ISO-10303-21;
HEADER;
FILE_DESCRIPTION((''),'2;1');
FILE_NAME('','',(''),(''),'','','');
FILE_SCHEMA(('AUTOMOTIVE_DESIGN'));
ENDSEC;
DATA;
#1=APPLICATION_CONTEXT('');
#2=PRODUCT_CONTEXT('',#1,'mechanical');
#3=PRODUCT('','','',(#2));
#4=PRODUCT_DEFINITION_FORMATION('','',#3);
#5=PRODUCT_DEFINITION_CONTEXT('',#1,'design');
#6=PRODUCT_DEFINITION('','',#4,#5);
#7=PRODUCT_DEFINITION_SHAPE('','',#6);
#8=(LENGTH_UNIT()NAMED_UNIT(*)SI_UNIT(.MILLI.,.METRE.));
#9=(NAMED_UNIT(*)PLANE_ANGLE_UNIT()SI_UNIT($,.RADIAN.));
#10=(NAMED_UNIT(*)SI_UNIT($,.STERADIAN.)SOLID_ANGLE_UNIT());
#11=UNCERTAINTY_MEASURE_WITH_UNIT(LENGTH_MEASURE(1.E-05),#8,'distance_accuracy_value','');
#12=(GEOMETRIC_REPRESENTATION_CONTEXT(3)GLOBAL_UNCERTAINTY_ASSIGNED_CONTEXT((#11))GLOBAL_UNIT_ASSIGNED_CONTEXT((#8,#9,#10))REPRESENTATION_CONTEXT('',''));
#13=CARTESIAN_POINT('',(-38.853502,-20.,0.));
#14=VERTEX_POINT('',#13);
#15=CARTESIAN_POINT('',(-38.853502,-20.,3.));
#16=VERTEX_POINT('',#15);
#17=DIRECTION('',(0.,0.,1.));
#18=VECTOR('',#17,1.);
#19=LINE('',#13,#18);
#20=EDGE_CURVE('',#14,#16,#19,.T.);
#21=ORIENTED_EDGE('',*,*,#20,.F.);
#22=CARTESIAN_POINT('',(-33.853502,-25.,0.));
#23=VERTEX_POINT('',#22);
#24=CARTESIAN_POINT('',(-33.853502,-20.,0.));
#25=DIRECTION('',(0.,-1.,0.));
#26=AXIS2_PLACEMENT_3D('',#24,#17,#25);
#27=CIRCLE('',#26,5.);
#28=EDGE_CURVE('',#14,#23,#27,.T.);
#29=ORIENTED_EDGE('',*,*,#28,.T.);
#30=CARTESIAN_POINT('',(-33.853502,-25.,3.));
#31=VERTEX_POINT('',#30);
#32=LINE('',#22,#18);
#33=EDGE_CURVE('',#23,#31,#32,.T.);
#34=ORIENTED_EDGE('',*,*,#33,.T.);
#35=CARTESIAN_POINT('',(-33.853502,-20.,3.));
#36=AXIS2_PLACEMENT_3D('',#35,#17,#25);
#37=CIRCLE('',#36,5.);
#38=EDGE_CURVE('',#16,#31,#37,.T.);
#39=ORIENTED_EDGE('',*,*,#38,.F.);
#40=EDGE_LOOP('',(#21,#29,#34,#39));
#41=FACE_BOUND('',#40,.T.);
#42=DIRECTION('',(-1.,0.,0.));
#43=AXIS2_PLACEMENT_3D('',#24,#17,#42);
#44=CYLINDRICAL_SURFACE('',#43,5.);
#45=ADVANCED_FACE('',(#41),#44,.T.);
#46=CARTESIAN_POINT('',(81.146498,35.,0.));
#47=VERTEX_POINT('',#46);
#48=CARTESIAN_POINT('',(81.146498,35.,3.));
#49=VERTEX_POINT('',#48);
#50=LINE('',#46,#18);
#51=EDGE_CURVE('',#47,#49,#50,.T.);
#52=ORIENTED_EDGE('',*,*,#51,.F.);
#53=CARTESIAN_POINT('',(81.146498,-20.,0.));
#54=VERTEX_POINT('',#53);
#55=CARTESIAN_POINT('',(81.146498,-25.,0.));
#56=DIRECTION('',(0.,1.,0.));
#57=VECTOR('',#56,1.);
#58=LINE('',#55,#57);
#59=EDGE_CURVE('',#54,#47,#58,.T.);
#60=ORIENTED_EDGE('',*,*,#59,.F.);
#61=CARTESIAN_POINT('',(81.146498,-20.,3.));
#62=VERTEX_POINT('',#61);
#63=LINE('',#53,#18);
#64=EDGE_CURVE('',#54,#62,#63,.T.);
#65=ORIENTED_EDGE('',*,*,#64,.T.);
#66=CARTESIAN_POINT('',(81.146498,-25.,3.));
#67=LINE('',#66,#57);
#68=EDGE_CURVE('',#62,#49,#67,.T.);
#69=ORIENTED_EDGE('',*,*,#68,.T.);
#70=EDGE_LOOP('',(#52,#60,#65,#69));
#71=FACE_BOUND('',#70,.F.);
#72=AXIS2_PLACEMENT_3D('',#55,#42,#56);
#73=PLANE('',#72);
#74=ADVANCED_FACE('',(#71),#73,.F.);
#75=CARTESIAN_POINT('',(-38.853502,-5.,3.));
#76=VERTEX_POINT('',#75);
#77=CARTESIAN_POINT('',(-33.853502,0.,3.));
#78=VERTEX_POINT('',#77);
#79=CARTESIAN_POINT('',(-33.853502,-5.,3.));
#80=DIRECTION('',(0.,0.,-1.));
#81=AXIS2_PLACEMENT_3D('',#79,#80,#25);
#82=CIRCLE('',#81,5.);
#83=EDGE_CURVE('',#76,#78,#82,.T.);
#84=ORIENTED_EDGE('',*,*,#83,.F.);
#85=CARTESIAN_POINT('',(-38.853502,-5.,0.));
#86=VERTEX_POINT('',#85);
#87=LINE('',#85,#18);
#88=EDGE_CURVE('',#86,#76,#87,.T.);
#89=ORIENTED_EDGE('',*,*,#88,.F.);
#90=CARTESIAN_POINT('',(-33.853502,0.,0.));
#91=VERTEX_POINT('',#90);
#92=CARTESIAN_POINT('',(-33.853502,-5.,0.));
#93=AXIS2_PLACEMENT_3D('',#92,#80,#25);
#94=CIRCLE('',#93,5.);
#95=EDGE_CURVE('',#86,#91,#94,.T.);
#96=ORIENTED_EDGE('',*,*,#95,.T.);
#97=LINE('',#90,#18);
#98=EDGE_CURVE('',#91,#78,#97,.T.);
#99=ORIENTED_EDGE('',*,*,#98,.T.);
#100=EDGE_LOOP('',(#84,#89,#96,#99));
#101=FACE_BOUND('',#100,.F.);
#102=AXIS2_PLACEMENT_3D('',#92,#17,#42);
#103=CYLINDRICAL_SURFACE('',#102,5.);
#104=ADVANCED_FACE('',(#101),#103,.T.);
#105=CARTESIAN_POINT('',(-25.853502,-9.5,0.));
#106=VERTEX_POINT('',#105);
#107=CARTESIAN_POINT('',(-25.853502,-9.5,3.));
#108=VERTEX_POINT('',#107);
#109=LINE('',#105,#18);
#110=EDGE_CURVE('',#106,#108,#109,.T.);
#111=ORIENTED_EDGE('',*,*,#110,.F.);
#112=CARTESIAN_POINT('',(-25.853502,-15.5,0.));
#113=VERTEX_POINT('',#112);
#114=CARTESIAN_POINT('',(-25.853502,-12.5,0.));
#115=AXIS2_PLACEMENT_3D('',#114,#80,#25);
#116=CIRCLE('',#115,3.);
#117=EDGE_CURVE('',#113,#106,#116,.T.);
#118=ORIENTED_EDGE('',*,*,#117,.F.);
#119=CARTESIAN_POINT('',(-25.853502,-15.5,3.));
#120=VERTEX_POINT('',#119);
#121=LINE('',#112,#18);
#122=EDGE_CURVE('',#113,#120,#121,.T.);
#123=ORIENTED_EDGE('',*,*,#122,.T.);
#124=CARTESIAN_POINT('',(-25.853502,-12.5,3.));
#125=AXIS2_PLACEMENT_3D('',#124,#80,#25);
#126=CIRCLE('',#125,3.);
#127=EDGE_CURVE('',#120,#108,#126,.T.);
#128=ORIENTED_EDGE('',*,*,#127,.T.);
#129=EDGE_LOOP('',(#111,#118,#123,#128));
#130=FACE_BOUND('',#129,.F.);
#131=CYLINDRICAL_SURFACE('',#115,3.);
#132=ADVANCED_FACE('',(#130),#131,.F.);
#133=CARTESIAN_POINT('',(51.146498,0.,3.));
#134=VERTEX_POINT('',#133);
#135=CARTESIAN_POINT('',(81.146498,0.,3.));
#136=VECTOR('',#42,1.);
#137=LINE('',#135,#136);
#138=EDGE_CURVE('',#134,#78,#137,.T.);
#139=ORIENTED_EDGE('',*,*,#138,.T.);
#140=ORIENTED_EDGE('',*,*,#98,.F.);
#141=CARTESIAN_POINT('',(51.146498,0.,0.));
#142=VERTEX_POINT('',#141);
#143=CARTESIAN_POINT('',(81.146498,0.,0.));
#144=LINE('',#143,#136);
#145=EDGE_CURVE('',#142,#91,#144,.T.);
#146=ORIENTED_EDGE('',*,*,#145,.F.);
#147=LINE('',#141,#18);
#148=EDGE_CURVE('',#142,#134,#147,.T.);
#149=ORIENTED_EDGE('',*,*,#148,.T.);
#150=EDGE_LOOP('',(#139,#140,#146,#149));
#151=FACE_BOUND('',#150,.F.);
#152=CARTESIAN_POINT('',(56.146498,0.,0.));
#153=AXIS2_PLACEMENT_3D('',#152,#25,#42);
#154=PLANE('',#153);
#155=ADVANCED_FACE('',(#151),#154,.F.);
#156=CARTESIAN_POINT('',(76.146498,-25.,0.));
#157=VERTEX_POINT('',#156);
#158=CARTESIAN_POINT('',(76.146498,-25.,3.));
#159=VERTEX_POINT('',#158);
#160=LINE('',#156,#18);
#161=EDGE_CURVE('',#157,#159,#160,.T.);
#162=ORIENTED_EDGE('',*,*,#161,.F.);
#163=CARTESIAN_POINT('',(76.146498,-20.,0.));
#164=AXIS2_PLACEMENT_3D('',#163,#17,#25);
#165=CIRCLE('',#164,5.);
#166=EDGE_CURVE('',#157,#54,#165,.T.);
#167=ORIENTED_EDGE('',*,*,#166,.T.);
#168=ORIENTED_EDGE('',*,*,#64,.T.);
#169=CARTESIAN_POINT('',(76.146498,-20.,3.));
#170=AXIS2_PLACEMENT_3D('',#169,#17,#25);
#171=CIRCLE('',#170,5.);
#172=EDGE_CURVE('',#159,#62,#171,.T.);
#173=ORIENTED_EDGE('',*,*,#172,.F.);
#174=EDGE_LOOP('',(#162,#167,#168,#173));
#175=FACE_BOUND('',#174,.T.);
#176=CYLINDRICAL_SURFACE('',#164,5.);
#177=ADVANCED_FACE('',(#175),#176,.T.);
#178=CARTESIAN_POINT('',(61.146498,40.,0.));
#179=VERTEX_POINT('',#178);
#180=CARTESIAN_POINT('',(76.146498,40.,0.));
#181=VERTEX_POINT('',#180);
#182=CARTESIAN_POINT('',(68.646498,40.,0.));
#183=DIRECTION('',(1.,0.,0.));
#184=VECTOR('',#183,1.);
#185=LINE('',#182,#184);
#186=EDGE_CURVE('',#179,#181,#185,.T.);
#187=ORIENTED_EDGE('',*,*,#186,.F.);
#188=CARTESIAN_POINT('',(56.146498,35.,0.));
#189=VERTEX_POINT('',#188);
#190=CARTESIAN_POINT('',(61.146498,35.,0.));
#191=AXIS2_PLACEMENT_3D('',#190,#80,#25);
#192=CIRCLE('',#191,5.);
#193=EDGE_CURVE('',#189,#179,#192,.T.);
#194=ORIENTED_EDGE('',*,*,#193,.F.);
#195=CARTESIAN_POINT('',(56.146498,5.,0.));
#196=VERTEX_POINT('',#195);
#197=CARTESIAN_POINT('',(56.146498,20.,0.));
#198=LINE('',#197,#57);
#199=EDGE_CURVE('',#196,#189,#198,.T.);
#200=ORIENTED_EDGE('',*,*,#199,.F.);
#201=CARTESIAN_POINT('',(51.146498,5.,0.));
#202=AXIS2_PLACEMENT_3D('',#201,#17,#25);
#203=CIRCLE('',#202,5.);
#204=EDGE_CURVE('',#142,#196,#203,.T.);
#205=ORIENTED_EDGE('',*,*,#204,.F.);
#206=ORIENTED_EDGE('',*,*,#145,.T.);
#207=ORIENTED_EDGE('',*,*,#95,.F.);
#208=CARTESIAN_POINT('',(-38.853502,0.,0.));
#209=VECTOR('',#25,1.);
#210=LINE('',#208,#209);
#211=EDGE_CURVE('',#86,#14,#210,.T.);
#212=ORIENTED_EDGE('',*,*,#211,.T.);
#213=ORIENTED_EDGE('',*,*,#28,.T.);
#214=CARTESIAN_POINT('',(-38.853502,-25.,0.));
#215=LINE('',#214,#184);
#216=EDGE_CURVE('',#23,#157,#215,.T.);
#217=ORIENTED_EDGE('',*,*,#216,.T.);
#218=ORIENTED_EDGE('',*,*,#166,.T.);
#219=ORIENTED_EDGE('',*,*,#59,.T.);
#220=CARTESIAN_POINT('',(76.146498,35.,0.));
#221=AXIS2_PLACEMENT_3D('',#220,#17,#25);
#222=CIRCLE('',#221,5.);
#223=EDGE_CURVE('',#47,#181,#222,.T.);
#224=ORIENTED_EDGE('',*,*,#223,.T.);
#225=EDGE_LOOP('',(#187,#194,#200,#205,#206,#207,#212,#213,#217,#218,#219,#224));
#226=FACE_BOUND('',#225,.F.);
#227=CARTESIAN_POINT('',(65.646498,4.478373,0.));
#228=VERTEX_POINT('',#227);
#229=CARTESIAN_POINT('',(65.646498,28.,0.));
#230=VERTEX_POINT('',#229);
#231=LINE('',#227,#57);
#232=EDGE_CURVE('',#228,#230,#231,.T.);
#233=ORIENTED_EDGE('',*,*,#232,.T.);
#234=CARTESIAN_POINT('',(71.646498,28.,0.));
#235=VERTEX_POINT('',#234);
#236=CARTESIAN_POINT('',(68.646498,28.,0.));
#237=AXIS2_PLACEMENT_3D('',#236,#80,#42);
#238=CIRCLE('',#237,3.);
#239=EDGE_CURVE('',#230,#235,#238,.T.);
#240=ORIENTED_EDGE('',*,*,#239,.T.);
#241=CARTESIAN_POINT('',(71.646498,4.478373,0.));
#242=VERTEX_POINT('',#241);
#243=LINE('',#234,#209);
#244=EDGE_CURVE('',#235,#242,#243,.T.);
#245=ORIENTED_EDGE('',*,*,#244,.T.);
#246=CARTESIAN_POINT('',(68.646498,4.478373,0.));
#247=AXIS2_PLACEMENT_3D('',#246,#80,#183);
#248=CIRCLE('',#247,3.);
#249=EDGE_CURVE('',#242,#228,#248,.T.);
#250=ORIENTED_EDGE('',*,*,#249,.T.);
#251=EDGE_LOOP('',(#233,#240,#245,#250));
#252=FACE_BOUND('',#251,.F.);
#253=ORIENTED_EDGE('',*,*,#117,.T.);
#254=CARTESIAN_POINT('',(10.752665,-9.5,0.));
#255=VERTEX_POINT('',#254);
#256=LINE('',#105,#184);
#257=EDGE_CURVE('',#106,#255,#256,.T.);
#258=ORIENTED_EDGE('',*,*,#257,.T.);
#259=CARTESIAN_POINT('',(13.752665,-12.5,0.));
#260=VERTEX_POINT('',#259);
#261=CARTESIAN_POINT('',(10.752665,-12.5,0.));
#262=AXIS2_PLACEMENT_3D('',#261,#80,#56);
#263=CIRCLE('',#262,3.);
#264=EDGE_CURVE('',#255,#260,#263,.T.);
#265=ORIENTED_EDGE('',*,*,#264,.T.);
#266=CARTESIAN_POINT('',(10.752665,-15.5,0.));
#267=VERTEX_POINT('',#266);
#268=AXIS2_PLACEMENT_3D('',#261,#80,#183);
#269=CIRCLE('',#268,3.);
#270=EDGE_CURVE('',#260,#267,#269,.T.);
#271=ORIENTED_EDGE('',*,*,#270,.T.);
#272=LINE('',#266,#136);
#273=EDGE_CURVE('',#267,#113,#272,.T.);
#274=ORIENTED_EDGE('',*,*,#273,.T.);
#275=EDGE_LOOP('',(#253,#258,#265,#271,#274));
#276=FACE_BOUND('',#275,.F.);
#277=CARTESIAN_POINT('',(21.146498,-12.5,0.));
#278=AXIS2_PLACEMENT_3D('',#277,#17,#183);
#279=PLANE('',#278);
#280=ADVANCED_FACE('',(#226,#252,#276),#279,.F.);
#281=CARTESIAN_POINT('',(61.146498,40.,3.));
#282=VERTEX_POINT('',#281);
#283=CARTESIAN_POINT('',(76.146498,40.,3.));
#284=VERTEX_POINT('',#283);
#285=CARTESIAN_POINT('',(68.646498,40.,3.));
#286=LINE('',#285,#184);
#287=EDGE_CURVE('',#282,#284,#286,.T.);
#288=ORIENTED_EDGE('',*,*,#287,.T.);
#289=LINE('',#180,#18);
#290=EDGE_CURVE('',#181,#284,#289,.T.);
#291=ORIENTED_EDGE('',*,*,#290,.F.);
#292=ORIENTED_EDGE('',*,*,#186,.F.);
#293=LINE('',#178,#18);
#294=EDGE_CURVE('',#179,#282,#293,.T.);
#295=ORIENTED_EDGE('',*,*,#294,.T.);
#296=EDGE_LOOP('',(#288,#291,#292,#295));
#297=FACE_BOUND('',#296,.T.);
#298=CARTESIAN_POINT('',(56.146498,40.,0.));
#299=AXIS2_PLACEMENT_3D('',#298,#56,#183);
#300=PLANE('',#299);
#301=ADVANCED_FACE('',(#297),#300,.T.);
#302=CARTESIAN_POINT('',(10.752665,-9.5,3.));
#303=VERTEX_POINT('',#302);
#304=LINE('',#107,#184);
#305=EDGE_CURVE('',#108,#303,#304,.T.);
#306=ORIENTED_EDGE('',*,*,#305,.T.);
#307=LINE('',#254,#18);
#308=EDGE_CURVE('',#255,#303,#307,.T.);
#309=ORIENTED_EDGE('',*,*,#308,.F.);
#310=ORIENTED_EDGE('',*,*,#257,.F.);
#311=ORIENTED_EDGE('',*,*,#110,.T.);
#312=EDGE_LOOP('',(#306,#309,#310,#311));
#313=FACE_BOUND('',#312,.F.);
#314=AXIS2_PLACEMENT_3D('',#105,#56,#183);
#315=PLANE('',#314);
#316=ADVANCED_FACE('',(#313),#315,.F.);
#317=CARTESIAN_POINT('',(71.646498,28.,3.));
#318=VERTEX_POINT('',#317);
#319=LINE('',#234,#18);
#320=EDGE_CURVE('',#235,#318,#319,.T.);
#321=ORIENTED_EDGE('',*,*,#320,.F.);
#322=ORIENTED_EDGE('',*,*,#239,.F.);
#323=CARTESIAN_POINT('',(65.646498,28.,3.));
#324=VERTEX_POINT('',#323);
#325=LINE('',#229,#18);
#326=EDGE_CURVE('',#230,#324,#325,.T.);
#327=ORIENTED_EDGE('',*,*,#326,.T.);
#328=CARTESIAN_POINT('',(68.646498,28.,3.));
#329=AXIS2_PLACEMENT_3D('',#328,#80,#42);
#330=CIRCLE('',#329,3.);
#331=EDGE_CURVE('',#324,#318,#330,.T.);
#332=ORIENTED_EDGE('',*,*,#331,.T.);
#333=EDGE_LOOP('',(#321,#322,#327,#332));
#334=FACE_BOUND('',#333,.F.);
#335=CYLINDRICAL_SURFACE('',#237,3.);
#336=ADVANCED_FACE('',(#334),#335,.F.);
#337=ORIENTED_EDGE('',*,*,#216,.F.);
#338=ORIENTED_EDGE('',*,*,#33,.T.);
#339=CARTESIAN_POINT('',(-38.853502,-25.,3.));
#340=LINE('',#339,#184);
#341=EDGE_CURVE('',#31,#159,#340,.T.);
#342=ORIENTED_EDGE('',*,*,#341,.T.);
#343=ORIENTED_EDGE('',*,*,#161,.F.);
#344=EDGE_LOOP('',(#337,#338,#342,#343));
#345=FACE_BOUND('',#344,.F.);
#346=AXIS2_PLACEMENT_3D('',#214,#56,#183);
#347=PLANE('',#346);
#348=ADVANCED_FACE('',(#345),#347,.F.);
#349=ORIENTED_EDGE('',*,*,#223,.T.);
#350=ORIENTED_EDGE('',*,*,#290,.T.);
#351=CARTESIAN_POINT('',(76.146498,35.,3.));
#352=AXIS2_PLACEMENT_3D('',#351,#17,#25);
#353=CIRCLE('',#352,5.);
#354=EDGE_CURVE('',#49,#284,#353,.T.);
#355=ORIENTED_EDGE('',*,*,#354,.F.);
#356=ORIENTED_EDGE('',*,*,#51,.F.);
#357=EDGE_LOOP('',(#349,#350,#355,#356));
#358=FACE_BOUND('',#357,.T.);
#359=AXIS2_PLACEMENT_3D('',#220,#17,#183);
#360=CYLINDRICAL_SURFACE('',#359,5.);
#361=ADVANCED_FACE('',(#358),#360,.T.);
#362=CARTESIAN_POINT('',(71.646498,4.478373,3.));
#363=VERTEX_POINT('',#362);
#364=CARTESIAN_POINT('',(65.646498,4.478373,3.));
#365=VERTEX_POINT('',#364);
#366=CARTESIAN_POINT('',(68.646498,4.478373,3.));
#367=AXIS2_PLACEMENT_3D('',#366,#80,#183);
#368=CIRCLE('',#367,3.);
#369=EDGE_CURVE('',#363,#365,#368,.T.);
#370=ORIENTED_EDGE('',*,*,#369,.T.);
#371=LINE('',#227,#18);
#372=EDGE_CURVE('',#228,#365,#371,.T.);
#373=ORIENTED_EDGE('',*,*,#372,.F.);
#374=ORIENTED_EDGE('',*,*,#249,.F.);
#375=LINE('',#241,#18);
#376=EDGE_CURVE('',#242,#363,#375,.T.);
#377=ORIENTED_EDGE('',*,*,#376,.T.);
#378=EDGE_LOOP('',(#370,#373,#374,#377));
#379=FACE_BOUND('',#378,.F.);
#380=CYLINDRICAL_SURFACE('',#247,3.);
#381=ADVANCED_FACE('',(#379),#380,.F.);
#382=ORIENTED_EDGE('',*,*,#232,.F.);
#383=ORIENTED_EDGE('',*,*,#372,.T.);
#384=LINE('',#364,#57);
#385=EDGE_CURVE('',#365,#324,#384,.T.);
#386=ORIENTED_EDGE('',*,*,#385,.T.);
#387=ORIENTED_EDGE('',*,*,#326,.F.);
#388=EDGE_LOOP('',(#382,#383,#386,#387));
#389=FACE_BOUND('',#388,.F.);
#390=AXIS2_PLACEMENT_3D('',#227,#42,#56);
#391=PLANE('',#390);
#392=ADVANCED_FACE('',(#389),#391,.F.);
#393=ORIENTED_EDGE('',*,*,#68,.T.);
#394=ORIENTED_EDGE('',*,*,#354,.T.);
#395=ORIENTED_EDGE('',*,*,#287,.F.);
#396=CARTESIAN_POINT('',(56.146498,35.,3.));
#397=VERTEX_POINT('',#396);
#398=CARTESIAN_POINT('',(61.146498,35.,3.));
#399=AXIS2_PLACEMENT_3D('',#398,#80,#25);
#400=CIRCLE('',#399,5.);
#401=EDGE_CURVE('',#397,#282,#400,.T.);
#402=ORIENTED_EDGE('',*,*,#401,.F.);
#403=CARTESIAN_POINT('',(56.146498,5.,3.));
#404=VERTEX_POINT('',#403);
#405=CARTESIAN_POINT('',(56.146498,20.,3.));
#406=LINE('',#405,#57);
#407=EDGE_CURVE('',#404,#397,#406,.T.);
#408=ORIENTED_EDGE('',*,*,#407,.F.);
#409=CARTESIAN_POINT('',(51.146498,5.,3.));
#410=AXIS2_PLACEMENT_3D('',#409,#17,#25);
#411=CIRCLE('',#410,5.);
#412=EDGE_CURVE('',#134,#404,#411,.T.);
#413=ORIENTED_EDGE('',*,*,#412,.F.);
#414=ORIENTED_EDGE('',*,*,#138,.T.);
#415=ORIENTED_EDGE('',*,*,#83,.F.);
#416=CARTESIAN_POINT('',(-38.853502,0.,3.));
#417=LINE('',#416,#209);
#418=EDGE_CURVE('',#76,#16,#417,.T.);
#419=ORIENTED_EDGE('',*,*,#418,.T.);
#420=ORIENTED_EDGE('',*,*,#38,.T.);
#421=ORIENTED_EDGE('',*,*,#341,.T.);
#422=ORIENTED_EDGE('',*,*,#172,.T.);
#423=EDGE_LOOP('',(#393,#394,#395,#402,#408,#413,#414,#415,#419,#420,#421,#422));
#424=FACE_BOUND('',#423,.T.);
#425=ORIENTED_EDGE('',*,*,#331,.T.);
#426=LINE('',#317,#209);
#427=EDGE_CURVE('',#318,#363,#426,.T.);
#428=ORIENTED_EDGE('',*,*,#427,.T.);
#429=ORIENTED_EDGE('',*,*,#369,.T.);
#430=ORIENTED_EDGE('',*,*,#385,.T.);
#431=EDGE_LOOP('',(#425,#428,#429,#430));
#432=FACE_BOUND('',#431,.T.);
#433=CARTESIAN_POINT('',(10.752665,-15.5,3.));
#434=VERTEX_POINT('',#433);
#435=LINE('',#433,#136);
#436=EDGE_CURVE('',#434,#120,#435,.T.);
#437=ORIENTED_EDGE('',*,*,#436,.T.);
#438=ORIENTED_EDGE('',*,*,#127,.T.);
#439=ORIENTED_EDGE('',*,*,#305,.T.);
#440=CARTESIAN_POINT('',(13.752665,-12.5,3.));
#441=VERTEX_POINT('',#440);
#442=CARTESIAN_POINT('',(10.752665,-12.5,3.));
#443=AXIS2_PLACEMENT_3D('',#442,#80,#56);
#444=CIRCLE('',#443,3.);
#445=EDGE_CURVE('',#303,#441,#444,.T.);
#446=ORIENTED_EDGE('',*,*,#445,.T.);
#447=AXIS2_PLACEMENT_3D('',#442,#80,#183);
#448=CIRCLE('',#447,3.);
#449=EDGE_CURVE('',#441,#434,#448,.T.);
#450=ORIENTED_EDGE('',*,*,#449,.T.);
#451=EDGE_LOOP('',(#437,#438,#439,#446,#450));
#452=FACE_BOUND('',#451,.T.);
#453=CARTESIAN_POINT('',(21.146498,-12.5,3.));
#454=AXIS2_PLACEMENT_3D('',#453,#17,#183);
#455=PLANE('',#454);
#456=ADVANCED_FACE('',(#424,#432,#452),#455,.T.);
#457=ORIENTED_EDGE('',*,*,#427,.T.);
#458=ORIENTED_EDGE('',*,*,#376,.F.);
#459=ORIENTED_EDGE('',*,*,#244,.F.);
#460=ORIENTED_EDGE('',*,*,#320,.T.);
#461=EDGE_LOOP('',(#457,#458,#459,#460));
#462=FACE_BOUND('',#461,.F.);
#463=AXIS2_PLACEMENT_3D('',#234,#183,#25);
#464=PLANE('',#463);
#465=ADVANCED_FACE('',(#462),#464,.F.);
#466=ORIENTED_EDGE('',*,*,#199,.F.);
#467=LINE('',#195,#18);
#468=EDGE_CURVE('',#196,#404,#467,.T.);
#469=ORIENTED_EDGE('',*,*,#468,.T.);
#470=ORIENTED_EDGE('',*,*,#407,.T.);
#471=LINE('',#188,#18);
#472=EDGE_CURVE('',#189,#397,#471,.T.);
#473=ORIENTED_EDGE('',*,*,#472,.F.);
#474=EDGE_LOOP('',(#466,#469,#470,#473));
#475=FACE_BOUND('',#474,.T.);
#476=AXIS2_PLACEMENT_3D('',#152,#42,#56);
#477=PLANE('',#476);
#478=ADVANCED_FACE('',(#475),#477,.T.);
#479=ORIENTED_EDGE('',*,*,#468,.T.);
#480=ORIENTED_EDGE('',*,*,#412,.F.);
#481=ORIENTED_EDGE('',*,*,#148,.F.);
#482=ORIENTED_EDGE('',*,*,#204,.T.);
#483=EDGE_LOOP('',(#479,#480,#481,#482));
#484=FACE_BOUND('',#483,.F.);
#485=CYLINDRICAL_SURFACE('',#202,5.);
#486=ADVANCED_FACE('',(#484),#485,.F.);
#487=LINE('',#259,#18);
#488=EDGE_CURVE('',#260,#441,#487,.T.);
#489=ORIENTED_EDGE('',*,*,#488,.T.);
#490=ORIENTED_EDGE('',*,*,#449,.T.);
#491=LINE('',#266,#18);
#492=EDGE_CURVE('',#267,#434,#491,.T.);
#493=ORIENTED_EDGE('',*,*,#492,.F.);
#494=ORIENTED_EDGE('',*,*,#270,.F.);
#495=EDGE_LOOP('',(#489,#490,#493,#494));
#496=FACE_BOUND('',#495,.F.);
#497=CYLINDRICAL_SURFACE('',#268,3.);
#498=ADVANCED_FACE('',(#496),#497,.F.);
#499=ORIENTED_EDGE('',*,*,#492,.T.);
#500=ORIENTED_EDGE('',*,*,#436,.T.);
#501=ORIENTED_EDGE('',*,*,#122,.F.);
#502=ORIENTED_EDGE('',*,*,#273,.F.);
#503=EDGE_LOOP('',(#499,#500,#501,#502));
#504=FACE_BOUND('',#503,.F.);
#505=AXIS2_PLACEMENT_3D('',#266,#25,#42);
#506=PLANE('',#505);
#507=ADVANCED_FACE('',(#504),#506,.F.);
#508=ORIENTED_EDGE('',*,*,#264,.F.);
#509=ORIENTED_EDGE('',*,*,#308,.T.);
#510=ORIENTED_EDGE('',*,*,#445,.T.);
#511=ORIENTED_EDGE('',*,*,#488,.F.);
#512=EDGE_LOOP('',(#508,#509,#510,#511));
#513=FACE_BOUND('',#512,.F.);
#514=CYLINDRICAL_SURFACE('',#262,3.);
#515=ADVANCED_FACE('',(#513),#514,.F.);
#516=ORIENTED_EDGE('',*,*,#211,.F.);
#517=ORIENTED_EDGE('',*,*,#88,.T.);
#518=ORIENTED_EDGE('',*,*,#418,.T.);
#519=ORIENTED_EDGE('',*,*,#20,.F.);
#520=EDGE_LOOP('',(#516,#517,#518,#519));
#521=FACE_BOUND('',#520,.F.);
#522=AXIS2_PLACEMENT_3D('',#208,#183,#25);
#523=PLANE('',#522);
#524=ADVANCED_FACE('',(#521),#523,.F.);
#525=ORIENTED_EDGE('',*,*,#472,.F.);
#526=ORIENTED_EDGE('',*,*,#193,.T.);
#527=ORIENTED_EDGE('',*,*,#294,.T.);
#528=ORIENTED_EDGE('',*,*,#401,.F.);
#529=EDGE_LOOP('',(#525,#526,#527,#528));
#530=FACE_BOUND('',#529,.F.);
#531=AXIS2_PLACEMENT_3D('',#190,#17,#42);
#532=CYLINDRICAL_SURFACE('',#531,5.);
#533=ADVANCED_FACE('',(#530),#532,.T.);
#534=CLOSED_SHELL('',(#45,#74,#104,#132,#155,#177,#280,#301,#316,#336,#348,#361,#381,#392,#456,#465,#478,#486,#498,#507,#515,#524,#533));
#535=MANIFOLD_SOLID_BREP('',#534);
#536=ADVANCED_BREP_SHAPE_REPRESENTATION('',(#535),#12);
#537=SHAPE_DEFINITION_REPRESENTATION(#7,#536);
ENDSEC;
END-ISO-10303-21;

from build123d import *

# Parameters (mm, degrees)
F0_W     = 25
F0_H     = 40
F1_DEPTH = 3
F2_R     = 5


with BuildPart() as f1:
    # F0 (on Top) → F1 (new body)
    with BuildSketch(Plane.XY):
        Polygon((56.1464983402, 0), (-38.8535016598, 0), (-38.8535016598, -25), (81.1464983402, -25), (81.1464983402, 0), align=None)
        with BuildLine():
            ThreePointArc((-25.8535016598, -15.5), (-28.8535016598, -12.5), (-25.8535016598, -9.5))
            Line((-25.8535016598, -9.5), (10.752664879, -9.5))
            ThreePointArc((10.752664879, -9.5), (12.8739852225, -10.3786796564), (13.752664879, -12.5))
            ThreePointArc((13.752664879, -12.5), (12.8739852225, -14.6213203436), (10.752664879, -15.5))
            Line((10.752664879, -15.5), (-25.8535016598, -15.5))
        make_face(mode=Mode.SUBTRACT)
        with Locations((68.6464983402, 20)):
            Rectangle(F0_W, F0_H)
        with BuildLine():
            ThreePointArc((65.6464983402, 28), (68.6464983402, 31), (71.6464983402, 28))
            Line((71.6464983402, 28), (71.6464983402, 4.4783727005))
            ThreePointArc((71.6464983402, 4.4783727005), (68.6464983402, 1.4783727005), (65.6464983402, 4.4783727005))
            Line((65.6464983402, 4.4783727005), (65.6464983402, 28))
        make_face(mode=Mode.SUBTRACT)
    extrude(amount=F1_DEPTH)

    # F2
    f2_edges = [f1.edges().sort_by_distance(p)[0] for p in [
        (-38.853502, -25, 1.5),
        (81.146498, -25, 1.5),
        (-38.853502, 0, 1.5),
        (81.146498, 40, 1.5),
        (56.146498, 40, 1.5),
        (56.146498, 0, 1.5),
    ]]
    fillet(f2_edges, radius=F2_R)


solid = f1.part
